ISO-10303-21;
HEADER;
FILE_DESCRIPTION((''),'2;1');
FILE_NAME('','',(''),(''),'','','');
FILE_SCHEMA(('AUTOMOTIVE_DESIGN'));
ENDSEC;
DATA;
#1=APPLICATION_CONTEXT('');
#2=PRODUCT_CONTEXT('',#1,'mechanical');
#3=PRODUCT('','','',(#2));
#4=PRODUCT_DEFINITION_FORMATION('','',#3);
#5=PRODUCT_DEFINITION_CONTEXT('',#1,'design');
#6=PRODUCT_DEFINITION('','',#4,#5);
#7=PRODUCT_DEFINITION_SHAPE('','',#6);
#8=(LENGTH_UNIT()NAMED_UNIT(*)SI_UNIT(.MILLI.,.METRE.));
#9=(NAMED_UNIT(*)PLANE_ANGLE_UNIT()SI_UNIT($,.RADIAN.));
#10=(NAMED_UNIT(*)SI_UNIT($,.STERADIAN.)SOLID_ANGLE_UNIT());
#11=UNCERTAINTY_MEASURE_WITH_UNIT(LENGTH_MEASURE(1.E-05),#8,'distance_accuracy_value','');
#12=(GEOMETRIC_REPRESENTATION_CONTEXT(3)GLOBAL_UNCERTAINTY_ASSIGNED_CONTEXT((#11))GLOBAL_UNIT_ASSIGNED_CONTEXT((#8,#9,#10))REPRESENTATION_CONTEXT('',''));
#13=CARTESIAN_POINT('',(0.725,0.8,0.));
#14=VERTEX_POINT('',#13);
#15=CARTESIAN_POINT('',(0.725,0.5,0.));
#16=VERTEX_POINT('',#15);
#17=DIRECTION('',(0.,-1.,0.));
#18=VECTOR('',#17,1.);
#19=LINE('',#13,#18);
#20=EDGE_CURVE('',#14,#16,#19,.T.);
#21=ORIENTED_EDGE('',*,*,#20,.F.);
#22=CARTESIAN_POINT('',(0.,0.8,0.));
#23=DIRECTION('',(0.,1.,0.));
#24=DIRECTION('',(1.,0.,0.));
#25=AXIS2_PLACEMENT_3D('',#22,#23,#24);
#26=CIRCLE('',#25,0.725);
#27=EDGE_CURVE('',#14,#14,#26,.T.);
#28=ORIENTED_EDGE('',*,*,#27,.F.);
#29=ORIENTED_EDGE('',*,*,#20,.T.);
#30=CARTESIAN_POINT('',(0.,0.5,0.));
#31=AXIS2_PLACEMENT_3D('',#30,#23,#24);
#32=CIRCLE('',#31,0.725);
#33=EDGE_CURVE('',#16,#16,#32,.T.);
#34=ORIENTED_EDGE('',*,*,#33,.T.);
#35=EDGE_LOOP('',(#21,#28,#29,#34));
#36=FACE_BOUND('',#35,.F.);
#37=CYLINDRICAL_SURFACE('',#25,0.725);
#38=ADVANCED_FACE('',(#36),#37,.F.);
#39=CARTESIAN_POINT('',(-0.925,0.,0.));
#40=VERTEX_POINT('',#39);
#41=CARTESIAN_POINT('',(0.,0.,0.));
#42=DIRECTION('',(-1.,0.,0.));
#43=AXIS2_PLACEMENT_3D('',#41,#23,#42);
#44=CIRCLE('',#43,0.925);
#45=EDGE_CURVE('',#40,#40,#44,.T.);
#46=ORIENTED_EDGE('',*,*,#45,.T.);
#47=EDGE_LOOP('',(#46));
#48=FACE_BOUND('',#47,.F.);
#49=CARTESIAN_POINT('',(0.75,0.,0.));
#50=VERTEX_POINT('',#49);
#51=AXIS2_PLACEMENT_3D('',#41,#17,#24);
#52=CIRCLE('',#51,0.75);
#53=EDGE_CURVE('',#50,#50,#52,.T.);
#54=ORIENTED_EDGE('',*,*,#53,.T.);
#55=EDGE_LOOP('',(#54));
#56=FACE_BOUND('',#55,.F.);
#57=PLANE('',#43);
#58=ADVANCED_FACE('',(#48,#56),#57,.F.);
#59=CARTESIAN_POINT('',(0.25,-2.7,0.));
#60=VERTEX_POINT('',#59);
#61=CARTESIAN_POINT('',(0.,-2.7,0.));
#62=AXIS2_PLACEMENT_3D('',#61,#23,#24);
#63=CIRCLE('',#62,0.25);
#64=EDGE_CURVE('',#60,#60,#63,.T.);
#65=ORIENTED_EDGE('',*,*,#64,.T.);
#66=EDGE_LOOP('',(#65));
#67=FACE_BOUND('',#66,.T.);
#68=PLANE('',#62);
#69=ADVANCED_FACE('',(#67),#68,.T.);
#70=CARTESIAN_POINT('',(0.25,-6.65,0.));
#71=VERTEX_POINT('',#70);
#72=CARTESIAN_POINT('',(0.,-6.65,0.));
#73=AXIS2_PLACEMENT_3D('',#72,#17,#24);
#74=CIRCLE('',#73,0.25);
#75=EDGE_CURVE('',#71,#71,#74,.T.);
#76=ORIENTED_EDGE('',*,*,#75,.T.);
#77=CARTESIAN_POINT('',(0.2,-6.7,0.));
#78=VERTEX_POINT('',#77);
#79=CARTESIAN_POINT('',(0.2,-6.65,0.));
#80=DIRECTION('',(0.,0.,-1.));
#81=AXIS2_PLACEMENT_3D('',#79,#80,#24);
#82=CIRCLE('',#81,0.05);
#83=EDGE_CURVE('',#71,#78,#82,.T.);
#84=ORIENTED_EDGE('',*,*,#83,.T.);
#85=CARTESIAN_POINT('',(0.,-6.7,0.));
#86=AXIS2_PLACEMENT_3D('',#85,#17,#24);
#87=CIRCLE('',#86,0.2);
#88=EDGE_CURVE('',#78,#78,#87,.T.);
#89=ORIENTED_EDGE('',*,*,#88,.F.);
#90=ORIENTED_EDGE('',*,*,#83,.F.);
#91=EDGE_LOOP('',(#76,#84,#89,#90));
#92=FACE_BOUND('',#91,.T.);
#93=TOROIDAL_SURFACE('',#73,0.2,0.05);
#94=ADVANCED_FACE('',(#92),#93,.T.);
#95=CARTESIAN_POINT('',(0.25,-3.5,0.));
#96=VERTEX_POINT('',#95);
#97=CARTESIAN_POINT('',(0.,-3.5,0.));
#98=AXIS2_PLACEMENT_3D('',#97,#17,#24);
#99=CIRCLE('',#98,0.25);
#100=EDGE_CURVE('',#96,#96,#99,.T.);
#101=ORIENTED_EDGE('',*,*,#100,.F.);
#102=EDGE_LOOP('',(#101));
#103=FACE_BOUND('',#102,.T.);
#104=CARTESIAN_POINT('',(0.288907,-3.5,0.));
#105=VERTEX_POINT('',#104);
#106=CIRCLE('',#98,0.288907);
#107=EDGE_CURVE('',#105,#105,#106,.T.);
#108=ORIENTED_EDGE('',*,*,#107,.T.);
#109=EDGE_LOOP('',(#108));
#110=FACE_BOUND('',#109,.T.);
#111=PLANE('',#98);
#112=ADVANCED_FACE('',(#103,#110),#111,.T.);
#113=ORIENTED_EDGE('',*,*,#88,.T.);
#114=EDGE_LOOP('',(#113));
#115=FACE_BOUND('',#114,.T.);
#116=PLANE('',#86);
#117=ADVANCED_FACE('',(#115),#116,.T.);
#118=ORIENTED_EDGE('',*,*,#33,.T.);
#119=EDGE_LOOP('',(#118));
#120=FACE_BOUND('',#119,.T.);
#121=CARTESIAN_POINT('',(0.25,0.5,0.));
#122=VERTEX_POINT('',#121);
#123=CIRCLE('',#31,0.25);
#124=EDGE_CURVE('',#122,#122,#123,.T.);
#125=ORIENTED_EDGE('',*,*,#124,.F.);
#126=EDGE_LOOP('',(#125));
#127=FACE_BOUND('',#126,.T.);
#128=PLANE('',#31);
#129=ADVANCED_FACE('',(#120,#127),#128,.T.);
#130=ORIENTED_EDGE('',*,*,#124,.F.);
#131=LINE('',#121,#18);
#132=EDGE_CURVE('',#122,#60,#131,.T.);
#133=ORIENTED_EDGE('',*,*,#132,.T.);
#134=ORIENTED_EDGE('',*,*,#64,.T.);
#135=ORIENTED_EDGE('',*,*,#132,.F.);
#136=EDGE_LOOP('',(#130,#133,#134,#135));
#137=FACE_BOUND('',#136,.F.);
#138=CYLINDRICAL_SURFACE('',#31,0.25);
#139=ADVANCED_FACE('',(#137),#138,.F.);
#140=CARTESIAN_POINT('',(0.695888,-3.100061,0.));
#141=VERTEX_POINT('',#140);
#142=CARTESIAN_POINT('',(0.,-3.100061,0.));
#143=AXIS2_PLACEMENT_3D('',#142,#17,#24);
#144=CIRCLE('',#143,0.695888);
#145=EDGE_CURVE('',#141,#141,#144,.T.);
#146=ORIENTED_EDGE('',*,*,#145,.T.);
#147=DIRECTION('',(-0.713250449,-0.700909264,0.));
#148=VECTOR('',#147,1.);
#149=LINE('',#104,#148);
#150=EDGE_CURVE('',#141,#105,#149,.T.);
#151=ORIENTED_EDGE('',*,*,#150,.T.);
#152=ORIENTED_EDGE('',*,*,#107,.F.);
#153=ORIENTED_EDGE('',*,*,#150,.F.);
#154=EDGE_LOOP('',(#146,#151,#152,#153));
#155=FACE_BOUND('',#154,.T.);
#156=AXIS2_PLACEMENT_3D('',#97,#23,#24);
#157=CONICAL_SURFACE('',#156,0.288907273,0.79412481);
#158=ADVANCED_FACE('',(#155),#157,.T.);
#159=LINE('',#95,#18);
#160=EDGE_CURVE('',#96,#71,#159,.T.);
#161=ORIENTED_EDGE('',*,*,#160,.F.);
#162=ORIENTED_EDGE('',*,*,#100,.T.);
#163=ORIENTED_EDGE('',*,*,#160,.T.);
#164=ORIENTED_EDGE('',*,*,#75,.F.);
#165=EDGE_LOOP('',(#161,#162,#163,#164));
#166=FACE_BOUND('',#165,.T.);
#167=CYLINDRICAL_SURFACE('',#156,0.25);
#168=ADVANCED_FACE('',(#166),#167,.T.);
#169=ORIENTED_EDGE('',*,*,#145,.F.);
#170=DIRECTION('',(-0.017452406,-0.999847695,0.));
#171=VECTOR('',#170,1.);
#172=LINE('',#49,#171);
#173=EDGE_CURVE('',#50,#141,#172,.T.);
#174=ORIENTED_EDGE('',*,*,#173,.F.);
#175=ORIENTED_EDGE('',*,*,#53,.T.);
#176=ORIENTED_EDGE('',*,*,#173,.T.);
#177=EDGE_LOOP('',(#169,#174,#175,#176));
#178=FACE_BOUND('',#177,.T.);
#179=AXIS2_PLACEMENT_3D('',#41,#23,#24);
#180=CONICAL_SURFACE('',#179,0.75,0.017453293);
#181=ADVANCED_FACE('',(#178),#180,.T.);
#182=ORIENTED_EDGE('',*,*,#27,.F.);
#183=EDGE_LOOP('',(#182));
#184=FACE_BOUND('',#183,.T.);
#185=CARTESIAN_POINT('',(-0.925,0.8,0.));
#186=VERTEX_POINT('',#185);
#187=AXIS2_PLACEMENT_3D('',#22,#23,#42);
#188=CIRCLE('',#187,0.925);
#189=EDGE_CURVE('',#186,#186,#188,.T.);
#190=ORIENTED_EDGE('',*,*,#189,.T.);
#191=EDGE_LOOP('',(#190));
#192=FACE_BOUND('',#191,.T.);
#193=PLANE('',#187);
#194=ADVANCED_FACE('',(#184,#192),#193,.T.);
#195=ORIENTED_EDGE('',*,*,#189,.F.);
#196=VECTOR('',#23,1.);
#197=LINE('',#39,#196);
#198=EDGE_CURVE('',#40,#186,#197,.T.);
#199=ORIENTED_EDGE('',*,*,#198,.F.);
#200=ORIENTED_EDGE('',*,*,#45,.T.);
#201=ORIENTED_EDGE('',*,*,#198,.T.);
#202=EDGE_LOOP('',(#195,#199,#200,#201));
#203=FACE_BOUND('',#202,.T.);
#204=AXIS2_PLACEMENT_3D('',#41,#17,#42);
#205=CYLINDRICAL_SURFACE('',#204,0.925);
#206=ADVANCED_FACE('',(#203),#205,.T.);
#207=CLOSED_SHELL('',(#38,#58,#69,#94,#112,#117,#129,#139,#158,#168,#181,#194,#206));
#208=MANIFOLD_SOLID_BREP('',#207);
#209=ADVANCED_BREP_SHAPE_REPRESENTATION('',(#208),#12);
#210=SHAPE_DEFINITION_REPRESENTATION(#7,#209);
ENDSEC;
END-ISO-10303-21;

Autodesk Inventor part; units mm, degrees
ref_plane "YZ Plane" through (0, 0, 0) normal (1, 0, 0) x (0, 1, 0)
ref_plane "XZ Plane" through (0, 0, 0) normal (0, 1, 0) x (-1, 0, 0)
ref_plane "XY Plane" through (0, 0, 0) normal (0, 0, 1) x (1, 0, 0)
sketch "Sketch1" plane through (0, 0, 0) normal (0, 1, 0) x (-1, 0, 0)
  circle A0 centre (0, 0) radius 0.925
  dimension "d0" = 1.85
extrude "Extrusion1" add sketch "Sketch1" along normal blind 0.8
sketch "Sketch2" plane through (0, 0, 0) normal (0, -1, 0) x (1, 0, 0)
  circle A0 centre (0, 0) radius 0.75
  dimension "d3" = 1.5
extrude "Extrusion2" add sketch "Sketch2" along normal blind 3.5 draft -1
sketch "Sketch3" plane through (0, -3.5, 0) normal (0, -1, 0) x (1, 0, 0)
  circle A0 centre (0, 0) radius 0.25
  dimension "d6" = 0.5
extrude "Extrusion3" add sketch "Sketch3" along normal blind 3.2
chamfer "Chamfer1" distance 0.4 angle 45 1 edges at (-0.6889, -3.5, 0)
fillet "Fillet1" radius 0.05 1 edges at (-0.25, -6.7, 0)
sketch "Sketch4" plane through (0, 0.8, 0) normal (0, 1, 0) x (1, 0, 0)
  circle A0 centre (0, 0) radius 0.725
  circle A1 centre (0, 0) radius 0.925 projected
  dimension "d13" = 0.2
extrude "Extrusion4" cut sketch "Sketch4" against normal blind 0.3 contours A0
sketch "Sketch5" plane through (0, 0.5, 0) normal (0, 1, 0) x (1, 0, 0)
  circle A0 centre (0, 0) radius 0.25
  dimension "d16" = 0.5
extrude "Extrusion5" cut sketch "Sketch5" against normal blind 3.2
properties part number "SIL connector"
